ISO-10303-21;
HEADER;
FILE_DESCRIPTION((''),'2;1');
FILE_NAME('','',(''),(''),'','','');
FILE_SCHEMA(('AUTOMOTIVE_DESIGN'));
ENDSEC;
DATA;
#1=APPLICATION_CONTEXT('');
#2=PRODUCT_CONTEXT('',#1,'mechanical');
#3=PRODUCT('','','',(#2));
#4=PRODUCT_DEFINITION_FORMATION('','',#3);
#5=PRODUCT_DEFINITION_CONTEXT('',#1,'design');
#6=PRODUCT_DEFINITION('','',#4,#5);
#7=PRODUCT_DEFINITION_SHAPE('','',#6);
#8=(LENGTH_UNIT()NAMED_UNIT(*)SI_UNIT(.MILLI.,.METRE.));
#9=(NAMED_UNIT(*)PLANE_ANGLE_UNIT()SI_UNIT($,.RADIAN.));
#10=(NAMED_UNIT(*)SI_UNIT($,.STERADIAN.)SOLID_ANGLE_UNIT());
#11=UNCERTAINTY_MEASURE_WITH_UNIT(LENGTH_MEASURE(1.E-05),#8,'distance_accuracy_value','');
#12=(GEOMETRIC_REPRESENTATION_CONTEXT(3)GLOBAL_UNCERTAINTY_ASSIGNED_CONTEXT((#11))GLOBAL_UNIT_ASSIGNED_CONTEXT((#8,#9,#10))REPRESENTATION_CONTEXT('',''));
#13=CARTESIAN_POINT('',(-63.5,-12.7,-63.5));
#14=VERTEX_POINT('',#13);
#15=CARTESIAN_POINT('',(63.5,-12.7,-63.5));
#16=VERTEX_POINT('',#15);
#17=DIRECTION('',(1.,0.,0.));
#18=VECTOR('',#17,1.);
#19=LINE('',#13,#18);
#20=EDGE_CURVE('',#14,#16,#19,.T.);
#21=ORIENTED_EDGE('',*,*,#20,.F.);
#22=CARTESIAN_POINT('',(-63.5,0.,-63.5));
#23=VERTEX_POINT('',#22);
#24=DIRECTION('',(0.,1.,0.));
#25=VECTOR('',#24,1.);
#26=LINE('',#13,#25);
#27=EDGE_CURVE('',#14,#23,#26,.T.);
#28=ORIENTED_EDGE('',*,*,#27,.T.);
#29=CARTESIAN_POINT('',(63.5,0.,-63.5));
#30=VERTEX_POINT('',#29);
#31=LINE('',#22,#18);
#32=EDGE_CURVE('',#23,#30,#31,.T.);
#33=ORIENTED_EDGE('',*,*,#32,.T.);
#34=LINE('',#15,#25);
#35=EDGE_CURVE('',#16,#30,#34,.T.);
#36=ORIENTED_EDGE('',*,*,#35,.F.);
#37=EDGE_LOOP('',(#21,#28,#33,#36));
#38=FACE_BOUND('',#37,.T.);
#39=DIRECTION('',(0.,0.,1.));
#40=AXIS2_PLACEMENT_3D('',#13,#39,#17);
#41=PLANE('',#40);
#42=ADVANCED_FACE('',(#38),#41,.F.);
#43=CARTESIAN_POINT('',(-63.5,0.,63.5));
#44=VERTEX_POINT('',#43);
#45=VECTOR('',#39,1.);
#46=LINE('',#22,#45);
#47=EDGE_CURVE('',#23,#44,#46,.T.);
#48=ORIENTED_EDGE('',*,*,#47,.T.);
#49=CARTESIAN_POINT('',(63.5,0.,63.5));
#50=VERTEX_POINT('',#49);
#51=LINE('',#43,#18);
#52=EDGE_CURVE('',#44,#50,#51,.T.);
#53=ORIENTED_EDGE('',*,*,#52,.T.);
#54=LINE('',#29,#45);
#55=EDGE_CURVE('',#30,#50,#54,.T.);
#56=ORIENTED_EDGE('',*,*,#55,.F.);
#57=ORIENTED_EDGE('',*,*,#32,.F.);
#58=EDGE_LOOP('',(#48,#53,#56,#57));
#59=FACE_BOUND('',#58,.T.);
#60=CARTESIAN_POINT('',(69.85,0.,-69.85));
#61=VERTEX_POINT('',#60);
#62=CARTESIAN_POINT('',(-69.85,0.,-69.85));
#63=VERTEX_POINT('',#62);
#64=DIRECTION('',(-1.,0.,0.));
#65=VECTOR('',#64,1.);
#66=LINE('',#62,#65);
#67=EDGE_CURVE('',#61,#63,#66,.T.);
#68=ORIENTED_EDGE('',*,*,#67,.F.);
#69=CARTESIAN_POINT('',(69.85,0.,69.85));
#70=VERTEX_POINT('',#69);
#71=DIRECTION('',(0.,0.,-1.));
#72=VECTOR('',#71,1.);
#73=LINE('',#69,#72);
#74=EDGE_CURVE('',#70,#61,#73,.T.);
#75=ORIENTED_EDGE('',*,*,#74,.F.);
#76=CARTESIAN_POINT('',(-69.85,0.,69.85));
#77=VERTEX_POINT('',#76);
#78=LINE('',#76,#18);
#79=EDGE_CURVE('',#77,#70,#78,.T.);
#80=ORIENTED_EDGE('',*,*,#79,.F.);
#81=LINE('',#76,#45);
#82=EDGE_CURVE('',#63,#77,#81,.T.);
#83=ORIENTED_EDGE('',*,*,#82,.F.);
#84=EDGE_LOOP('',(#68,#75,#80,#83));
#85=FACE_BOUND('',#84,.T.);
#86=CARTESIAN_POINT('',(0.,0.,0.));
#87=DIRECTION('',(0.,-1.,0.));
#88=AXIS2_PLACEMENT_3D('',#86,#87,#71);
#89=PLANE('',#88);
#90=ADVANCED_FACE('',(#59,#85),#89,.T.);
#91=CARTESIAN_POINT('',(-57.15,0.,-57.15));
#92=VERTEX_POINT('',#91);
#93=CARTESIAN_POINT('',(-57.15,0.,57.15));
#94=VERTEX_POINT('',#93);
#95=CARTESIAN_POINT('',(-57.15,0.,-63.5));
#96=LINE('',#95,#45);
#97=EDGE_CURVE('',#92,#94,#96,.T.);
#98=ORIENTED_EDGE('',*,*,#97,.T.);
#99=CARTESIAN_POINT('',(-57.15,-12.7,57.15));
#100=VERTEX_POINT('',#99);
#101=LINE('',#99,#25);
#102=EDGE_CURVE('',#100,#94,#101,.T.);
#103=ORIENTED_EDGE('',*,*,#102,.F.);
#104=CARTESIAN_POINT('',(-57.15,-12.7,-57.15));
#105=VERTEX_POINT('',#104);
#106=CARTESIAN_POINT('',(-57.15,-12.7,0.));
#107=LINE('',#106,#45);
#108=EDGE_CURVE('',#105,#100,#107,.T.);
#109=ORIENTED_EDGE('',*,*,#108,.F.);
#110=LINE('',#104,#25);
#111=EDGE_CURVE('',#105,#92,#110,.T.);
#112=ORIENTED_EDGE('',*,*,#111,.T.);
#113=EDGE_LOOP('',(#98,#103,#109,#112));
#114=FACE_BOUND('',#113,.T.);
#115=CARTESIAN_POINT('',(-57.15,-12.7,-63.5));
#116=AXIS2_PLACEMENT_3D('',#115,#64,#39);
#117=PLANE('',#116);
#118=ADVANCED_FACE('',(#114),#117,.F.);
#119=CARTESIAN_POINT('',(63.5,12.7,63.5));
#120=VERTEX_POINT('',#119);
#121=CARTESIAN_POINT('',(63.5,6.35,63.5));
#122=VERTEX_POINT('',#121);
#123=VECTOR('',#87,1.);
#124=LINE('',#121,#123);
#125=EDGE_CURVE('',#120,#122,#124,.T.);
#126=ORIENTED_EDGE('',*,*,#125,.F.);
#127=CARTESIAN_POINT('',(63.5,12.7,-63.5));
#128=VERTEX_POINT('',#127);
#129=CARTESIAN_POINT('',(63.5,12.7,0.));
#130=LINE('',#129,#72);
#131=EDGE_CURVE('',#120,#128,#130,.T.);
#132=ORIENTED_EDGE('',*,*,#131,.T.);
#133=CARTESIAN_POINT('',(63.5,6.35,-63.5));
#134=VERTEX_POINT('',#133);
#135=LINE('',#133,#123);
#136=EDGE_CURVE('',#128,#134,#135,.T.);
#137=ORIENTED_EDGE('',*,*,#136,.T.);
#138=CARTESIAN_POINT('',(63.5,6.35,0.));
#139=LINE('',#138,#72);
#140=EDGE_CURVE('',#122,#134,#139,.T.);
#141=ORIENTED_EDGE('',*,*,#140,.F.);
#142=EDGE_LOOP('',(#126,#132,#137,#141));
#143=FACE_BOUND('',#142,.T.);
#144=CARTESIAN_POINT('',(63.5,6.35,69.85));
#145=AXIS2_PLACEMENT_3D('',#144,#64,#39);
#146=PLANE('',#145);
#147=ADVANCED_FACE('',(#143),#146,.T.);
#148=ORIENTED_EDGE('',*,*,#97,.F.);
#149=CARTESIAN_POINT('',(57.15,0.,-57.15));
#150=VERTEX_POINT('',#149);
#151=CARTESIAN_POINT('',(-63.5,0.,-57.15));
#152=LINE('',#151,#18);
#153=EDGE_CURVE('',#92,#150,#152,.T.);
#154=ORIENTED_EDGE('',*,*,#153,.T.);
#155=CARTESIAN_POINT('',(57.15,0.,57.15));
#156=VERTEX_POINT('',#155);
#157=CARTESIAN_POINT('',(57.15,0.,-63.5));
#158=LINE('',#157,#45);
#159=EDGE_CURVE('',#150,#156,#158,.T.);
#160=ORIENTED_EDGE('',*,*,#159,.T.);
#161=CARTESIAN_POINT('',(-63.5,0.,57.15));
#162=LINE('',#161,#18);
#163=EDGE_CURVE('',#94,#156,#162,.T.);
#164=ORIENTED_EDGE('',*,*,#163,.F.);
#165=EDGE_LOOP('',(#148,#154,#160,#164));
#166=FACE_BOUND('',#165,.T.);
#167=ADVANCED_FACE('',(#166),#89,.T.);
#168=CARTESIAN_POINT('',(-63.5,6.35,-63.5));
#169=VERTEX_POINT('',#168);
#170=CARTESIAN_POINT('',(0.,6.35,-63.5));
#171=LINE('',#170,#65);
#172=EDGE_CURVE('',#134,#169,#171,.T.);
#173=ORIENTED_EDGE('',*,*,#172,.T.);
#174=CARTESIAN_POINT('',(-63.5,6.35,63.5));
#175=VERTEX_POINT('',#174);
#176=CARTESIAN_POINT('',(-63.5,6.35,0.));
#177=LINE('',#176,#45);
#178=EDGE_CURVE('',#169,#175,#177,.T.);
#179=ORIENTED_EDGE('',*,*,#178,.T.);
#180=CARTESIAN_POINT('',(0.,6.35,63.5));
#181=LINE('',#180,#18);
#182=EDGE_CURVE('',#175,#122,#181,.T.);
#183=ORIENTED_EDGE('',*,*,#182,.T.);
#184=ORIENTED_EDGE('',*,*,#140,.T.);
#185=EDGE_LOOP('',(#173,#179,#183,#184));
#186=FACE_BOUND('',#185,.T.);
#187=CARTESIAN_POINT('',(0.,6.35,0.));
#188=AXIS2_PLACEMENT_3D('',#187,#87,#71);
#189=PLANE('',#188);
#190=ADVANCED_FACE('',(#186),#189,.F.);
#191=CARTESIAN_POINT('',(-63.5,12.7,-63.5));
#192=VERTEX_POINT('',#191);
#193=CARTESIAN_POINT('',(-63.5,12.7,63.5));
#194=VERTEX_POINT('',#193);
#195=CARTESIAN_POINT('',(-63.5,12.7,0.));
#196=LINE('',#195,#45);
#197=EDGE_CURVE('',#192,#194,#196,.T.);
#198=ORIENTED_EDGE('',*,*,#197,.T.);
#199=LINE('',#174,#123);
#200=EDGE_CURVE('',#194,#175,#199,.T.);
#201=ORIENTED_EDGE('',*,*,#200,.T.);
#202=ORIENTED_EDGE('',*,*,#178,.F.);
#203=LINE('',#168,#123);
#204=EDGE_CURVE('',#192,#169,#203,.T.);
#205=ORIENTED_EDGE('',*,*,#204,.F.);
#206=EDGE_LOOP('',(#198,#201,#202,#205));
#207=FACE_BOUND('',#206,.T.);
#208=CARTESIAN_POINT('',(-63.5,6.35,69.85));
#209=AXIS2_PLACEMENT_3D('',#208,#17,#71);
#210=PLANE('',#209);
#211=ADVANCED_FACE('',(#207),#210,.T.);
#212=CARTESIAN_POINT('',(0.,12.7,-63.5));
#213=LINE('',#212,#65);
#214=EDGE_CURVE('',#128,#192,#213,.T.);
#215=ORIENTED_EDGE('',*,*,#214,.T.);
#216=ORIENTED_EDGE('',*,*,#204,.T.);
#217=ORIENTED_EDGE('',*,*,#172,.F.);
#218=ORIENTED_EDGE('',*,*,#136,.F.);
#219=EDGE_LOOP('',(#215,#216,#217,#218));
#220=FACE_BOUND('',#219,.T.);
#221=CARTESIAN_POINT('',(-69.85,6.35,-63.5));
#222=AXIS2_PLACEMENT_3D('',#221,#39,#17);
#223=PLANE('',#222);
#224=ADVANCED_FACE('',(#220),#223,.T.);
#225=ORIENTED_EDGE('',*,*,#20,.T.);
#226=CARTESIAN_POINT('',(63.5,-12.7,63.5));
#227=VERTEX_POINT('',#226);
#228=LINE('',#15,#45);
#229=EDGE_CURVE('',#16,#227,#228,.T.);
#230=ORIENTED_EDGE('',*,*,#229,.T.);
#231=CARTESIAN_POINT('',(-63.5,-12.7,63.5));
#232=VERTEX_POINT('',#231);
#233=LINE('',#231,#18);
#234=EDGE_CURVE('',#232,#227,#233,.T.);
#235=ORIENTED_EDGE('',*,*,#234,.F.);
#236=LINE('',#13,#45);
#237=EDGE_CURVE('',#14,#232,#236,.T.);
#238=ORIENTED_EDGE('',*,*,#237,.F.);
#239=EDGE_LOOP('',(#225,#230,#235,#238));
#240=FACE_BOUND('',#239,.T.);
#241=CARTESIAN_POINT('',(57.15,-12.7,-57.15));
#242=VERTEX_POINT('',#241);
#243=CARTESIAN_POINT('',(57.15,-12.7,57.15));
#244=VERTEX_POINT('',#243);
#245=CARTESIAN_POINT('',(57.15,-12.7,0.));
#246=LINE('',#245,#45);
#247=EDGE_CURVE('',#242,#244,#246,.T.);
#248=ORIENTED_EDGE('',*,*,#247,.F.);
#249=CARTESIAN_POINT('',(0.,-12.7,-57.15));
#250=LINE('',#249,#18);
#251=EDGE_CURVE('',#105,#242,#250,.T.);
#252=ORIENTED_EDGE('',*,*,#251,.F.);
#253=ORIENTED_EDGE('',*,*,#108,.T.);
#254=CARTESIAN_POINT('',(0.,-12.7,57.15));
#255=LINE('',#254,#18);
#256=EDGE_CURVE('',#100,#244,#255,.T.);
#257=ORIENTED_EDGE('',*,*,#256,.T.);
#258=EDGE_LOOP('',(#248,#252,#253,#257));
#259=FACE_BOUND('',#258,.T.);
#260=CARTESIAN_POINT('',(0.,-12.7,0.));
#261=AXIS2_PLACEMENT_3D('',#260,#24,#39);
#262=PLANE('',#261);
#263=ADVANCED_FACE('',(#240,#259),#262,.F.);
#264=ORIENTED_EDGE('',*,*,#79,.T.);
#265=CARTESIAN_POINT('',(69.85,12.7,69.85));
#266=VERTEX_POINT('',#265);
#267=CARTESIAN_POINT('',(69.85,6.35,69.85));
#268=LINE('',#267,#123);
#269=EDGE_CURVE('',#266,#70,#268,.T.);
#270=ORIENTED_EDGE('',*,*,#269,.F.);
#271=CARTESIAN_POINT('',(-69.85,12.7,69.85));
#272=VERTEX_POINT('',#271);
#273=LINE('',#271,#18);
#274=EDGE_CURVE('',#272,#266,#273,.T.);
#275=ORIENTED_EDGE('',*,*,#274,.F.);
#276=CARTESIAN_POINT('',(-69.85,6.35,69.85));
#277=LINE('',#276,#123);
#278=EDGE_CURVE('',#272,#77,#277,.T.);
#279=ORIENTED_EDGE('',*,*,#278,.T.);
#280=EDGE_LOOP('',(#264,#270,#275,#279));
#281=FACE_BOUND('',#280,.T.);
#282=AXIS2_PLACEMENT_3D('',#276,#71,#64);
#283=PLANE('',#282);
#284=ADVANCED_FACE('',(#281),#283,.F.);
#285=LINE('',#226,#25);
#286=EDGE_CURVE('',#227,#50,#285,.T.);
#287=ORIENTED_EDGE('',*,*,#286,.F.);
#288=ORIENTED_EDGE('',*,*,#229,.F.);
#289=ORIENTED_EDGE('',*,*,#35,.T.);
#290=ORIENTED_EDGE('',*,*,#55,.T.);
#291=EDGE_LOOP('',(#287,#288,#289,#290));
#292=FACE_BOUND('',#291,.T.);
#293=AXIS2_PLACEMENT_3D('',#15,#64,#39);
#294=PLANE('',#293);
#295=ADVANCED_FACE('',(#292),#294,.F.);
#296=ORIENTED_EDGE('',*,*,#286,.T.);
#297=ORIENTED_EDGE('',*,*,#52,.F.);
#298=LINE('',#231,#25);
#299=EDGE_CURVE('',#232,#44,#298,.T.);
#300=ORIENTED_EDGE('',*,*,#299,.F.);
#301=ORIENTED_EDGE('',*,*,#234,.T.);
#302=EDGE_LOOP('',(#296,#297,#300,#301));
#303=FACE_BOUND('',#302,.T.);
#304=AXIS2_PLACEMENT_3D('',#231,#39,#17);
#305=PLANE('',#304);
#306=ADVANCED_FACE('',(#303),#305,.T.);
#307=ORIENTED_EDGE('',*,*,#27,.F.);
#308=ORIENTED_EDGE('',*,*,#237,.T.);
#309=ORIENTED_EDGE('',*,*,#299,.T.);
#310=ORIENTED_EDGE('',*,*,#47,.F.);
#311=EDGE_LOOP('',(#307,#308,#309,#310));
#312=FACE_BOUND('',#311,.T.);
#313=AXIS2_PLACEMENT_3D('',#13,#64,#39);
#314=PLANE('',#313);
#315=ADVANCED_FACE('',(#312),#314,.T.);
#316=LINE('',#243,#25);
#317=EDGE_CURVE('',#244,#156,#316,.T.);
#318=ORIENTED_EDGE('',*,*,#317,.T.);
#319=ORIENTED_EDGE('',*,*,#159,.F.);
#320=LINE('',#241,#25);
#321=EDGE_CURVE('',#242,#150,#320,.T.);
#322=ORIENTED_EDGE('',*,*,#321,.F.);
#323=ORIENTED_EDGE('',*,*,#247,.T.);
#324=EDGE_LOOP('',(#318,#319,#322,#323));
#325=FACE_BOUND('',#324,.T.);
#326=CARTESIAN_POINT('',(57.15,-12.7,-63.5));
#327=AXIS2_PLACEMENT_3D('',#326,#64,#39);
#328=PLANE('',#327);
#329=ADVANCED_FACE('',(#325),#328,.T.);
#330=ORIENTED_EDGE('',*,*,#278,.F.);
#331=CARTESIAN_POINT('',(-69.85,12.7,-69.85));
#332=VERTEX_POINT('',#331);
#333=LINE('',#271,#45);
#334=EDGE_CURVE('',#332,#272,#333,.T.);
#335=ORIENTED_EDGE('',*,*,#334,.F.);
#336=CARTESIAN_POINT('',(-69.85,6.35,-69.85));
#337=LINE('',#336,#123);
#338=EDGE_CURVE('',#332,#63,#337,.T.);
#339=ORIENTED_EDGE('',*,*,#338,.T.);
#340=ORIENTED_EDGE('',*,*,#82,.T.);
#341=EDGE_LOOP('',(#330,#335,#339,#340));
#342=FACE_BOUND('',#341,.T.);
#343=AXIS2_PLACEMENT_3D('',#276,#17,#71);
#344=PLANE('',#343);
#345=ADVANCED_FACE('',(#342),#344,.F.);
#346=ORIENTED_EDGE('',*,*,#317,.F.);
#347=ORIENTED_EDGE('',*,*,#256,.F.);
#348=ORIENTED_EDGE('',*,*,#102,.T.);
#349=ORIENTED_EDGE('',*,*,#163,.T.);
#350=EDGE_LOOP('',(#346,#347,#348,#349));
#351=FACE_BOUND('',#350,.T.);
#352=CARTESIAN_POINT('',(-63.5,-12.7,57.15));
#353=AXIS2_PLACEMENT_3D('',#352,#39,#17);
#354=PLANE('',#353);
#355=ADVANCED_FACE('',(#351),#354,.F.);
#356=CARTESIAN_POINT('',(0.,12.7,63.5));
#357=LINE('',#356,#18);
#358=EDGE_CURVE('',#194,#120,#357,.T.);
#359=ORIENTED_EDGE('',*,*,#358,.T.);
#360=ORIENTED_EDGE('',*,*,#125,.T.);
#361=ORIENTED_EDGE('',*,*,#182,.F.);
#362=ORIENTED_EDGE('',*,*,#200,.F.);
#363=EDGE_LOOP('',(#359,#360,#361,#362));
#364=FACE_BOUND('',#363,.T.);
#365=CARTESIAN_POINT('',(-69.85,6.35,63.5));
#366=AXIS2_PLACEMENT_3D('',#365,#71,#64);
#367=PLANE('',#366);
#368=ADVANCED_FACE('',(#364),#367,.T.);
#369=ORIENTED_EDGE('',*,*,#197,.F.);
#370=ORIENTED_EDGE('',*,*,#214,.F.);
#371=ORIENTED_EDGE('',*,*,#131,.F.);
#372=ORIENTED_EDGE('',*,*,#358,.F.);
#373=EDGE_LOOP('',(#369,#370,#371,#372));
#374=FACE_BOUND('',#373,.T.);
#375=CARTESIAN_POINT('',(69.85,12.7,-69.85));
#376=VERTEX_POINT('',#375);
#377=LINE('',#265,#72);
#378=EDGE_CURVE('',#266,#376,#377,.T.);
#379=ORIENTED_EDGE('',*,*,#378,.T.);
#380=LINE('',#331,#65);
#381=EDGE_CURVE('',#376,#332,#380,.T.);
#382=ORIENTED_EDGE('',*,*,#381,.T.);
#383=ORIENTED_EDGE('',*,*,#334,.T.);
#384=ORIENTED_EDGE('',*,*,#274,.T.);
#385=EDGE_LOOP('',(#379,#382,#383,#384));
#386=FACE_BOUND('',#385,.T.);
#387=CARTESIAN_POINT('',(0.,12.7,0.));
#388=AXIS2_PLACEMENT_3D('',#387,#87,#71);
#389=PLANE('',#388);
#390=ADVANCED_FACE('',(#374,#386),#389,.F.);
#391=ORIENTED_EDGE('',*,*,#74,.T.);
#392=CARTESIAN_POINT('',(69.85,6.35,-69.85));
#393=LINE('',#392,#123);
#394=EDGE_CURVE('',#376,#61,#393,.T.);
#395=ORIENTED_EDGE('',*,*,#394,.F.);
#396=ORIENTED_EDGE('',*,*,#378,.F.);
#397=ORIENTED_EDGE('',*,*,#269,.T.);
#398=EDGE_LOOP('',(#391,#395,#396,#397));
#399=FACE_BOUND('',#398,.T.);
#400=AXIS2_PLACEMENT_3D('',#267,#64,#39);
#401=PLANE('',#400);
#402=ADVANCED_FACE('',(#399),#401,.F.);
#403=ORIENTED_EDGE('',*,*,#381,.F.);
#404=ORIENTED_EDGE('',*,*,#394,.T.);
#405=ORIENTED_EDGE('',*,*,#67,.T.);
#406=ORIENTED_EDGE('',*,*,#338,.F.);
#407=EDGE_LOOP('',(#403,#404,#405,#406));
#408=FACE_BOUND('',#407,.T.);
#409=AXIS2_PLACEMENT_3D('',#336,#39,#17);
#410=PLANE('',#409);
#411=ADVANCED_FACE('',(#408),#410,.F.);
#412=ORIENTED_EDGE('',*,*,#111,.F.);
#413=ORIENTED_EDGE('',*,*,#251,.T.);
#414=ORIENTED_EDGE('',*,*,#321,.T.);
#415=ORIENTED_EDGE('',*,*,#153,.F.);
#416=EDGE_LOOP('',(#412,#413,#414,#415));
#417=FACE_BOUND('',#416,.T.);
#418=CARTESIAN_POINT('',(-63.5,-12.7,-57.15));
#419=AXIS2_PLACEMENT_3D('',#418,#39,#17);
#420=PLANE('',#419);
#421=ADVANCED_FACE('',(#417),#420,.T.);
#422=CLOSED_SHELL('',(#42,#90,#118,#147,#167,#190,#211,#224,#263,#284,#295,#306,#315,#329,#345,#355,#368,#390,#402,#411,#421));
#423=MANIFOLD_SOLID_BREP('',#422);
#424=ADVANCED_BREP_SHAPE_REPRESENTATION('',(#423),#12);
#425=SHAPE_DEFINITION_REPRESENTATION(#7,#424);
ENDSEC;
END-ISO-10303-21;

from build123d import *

# Parameters (mm, degrees)
SKETCH1_W           = 139.7
SKETCH1_H           = 139.7
BOSS_EXTRUDE1_DEPTH = 6.35
SKETCH4_W           = 139.7
SKETCH4_H           = 139.7
BOSS_EXTRUDE2_DEPTH = 6.35
SHELL1_T            = -6.35
SKETCH5_W           = 127
SKETCH5_H           = 127
BOSS_EXTRUDE4_DEPTH = 12.7
SHELL2_START        = -12.7
SHELL2_OUTLINE_W    = 114.3
SHELL2_OUTLINE_H    = 114.3
SHELL2_DEPTH        = 12.7


# Read off the part's stored shape, not the designer's step: Shell2
with BuildPart() as part:
    # Sketch1 → Boss-Extrude1 (new body)
    with BuildSketch(Plane(origin=(0, 0, 0), x_dir=(1, 0, 0), z_dir=(0, 1, 0))):
        Rectangle(SKETCH1_W, SKETCH1_H)
    extrude(amount=BOSS_EXTRUDE1_DEPTH)

    # Sketch4 → Boss-Extrude2 (add)
    with BuildSketch(Plane(origin=(0, 6.35, 0), x_dir=(1, 0, 0), z_dir=(0, 1, 0))):
        Rectangle(SKETCH4_W, SKETCH4_H)
    extrude(amount=BOSS_EXTRUDE2_DEPTH)

    # Shell1
    shell1_openings = [part.faces().sort_by_distance(p)[0] for p in [
        (0, 12.7, 0),
    ]]
    offset(amount=SHELL1_T, openings=shell1_openings, kind=Kind.INTERSECTION)

    # Sketch5 → Boss-Extrude4 (add)
    with BuildSketch(Plane(origin=(0, 0, 0), x_dir=(-1, 0, 0), z_dir=(0, -1, 0))):
        Rectangle(SKETCH5_W, SKETCH5_H)
    extrude(amount=BOSS_EXTRUDE4_DEPTH)

    # Shell2 outline → Shell2 (cut)
    with BuildSketch(Plane(origin=(0, 0, 0), x_dir=(1, 0, 0), z_dir=(0, 1, 0)).offset(SHELL2_START)):
        Rectangle(SHELL2_OUTLINE_W, SHELL2_OUTLINE_H)
    extrude(amount=SHELL2_DEPTH, mode=Mode.SUBTRACT)


solid = part.part
